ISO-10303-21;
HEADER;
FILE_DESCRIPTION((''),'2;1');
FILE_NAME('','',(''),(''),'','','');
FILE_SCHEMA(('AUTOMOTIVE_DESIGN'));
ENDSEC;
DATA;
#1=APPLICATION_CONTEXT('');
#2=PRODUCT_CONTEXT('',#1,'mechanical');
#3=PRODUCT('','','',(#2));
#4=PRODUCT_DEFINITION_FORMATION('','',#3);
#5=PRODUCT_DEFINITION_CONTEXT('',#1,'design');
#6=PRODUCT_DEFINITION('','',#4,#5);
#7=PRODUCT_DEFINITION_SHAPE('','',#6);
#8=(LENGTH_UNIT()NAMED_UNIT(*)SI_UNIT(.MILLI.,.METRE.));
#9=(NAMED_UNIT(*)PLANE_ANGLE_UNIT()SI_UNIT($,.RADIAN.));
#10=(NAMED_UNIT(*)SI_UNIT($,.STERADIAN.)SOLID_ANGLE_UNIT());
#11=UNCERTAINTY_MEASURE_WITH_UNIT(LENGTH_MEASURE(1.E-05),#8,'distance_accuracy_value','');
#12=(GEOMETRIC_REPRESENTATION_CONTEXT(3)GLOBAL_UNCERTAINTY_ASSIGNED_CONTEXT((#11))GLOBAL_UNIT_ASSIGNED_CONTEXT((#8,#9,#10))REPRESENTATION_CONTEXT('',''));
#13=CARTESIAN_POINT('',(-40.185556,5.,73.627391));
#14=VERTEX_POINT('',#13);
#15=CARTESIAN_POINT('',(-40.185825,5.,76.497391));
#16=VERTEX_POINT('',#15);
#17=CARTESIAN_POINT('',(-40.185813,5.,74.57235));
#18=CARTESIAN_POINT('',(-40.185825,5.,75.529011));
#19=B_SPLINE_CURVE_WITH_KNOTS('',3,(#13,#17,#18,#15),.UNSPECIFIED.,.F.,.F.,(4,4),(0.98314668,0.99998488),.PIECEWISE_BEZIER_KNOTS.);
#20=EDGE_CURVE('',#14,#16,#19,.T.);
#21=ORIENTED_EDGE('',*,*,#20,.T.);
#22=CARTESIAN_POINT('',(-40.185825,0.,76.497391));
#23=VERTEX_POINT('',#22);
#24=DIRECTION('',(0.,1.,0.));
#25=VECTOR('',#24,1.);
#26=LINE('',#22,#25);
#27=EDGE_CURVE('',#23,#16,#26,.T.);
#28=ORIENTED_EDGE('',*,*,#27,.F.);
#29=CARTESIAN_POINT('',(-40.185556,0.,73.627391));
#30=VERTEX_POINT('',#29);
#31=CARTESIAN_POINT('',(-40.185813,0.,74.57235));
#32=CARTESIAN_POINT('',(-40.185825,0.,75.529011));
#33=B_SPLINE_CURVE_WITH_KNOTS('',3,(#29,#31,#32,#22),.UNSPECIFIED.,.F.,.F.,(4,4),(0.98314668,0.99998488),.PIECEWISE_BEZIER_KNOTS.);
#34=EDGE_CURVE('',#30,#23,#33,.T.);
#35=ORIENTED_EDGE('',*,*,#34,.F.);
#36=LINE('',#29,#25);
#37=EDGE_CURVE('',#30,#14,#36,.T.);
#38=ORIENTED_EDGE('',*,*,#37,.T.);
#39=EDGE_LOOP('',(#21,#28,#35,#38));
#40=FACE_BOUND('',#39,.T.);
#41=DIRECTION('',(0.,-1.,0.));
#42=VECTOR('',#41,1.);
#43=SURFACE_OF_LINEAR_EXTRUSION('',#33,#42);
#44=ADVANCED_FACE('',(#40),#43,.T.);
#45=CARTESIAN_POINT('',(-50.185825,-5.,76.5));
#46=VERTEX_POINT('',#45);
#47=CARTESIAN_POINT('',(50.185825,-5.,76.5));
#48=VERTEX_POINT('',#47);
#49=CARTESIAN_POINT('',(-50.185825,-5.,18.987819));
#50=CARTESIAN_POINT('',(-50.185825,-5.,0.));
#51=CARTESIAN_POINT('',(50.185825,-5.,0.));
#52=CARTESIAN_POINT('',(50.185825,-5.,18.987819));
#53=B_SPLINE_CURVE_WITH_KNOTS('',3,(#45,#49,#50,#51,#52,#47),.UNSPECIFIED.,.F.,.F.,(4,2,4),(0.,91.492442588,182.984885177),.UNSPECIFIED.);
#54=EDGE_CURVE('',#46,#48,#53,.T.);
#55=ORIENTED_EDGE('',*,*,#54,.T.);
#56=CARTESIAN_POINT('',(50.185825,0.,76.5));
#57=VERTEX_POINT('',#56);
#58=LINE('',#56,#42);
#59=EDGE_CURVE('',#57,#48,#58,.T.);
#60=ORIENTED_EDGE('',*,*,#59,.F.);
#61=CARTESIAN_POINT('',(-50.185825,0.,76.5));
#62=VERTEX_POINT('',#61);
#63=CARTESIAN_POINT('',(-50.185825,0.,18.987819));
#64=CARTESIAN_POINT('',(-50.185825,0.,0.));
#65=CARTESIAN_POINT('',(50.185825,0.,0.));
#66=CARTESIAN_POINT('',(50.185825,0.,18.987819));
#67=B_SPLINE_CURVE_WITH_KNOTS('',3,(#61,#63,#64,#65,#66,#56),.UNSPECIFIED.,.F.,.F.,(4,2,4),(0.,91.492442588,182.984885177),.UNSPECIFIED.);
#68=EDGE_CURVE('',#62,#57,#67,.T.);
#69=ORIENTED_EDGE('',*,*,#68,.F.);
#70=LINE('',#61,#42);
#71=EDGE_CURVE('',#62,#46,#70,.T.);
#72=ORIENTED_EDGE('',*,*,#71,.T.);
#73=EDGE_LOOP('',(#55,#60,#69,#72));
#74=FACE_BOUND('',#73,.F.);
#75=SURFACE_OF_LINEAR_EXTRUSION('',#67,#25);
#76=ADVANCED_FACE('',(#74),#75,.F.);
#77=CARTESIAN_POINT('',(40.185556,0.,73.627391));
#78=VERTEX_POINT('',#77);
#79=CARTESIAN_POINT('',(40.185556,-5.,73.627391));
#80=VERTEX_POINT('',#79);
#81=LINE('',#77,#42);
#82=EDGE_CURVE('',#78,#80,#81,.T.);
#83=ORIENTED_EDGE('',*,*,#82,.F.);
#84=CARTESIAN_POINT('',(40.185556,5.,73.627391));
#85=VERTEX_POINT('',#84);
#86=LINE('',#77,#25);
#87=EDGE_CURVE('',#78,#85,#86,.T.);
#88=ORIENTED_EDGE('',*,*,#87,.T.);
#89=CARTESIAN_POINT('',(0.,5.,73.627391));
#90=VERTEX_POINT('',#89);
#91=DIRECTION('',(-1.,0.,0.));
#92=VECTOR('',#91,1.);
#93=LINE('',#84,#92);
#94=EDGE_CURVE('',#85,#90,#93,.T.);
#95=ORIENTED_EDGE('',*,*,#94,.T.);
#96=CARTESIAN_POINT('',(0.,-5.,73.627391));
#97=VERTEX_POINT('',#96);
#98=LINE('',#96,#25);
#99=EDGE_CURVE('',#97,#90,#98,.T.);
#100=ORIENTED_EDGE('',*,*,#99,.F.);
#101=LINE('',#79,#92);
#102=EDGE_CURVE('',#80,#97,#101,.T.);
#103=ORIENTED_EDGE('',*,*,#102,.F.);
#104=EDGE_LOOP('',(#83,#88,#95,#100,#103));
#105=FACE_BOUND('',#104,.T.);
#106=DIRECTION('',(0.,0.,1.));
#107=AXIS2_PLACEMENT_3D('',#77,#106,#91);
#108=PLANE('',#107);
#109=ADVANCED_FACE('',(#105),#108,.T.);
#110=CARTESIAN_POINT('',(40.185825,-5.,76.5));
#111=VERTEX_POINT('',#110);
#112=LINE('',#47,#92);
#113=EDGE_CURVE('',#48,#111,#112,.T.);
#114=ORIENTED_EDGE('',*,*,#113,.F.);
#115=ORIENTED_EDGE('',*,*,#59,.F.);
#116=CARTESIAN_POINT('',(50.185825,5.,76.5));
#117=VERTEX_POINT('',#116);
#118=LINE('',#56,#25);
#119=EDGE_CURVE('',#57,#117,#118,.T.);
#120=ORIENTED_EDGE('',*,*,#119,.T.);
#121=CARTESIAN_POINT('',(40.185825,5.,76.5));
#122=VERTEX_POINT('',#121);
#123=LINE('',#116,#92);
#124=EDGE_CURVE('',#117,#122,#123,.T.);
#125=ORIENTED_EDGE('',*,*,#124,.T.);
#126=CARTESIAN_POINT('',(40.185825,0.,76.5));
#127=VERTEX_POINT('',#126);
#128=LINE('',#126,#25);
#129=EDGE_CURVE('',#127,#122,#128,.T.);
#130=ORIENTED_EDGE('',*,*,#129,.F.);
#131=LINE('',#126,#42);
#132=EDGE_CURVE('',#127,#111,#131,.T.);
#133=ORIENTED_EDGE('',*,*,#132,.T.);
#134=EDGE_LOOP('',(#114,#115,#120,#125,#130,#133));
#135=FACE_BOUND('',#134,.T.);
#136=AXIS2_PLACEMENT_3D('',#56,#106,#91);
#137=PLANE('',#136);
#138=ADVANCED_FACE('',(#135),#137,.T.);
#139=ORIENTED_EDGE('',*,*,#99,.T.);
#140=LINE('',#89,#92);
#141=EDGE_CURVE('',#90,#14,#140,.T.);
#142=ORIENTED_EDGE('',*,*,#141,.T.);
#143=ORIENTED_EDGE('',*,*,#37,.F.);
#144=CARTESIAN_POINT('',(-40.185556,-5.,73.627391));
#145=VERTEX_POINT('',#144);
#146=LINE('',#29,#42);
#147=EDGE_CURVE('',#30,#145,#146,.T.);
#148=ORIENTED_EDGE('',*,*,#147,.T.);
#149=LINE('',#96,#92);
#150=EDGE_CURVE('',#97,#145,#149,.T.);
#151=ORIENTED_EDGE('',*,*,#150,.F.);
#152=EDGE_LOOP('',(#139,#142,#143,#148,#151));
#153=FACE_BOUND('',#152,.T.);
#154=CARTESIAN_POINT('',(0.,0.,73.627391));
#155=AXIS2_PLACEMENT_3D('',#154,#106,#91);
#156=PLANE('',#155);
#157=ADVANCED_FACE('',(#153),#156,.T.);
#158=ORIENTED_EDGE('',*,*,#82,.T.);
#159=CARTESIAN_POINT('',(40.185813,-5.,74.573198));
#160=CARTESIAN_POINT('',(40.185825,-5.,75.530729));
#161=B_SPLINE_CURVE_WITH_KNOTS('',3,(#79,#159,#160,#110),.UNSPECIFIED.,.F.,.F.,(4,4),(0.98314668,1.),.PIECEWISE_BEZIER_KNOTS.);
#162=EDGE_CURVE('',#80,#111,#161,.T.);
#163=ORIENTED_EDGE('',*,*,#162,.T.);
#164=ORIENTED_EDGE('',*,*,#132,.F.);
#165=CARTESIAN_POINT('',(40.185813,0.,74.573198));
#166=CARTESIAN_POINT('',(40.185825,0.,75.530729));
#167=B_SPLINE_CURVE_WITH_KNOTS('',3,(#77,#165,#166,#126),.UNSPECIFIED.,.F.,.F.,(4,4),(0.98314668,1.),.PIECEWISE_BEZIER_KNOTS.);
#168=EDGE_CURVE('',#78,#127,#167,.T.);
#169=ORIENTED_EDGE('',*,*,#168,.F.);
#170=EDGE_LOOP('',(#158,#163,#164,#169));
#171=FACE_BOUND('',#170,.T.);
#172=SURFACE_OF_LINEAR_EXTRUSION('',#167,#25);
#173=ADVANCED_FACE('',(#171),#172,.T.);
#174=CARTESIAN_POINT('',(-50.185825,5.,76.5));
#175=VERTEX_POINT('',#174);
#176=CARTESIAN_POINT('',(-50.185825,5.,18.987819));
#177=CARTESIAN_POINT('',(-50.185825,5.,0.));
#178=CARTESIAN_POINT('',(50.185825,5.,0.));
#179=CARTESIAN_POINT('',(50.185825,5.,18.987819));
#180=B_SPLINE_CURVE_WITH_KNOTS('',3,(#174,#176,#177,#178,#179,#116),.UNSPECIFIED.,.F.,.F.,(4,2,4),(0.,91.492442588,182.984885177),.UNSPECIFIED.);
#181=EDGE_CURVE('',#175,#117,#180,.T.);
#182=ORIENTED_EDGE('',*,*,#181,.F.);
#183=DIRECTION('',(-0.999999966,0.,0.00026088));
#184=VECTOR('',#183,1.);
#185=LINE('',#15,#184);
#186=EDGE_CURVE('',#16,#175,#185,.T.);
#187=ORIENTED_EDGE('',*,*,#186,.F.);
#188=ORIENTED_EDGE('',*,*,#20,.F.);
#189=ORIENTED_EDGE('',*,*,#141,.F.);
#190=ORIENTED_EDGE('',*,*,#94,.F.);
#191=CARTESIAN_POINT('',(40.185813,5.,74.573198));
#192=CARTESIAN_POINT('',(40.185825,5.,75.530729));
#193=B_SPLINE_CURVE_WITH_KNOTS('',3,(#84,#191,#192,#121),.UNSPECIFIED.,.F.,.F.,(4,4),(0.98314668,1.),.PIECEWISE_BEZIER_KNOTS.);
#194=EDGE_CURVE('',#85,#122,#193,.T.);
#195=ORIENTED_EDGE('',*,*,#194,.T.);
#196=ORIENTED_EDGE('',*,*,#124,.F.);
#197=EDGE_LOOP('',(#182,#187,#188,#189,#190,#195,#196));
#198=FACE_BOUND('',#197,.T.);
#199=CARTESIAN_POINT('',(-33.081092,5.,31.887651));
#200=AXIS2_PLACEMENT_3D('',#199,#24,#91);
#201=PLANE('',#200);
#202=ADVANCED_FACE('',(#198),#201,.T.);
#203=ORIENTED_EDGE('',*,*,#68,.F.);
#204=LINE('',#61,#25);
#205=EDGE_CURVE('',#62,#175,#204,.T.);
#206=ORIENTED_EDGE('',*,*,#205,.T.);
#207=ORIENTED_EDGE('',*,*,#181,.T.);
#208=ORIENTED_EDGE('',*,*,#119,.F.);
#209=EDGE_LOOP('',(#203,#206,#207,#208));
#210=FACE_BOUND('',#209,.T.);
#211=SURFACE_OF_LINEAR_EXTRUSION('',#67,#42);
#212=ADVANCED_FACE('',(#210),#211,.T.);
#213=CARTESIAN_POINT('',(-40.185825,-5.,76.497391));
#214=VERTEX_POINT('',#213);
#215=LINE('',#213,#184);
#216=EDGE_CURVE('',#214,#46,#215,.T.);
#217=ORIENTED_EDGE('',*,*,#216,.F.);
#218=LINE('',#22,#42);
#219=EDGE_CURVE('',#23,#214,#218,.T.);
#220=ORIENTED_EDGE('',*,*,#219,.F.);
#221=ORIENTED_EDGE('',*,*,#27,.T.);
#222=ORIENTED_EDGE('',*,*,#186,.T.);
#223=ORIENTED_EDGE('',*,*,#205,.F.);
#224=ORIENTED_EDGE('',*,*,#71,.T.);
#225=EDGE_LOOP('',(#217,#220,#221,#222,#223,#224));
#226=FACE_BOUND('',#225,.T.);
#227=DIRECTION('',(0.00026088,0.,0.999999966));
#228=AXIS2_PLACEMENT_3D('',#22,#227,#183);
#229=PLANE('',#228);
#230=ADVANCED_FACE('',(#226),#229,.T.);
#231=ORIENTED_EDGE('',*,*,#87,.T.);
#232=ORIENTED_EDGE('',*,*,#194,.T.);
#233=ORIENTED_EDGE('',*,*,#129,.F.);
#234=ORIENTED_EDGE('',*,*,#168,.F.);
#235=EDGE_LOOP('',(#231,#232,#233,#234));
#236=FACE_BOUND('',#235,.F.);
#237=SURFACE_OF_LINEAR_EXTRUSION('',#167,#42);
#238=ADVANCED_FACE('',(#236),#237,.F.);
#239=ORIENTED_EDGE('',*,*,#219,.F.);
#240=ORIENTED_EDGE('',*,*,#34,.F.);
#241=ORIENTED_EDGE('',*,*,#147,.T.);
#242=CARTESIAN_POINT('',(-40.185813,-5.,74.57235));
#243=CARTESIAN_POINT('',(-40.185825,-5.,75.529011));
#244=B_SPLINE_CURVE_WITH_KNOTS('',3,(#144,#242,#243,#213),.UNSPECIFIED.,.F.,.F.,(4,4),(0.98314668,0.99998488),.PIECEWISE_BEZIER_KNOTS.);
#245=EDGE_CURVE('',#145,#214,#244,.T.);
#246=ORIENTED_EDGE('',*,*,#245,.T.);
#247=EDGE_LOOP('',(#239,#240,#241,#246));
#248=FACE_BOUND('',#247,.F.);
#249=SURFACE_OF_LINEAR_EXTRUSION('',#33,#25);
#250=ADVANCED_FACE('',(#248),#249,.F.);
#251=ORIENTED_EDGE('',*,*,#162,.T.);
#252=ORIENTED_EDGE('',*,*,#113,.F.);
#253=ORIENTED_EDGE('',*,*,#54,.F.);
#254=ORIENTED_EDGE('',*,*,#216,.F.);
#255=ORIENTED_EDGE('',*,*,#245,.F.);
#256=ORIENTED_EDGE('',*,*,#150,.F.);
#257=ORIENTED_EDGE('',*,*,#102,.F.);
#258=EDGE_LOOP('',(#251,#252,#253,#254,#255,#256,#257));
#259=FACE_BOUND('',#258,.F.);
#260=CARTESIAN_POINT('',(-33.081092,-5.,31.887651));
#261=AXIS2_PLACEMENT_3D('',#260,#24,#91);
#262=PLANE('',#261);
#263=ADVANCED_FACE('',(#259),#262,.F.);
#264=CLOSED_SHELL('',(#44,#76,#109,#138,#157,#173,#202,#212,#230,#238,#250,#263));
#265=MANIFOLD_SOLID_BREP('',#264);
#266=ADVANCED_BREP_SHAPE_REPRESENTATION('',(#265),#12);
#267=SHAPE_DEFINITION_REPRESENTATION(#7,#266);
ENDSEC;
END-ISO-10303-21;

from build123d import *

# Parameters (mm, degrees)
F1_DEPTH = 5


# Not quite as in the source:
# - ends of sketch curves that miss each other by under 0.0002 mm in the source are joined
# - the dataset's text gives a spline's control points without its knots; the knots are read off the source's solid


with BuildPart() as f1:
    # F0 (on Front) → F1 (new body, symmetric)
    with BuildSketch(Plane.XZ):
        with BuildLine():
            add(Edge.make_bspline(
                [(0, 0), (-50.185825198, 0), (-50.185825198, 18.9878194471), (-50.185825198, 76.5)],
                knots=[0, 0, 0, 0, 91.4924425884, 91.4924425884, 91.4924425884, 91.4924425884], degree=3))
            Line((0, 0), (0, 10))
            add(Edge.make_bspline(
                [(0, 10), (-2.9789681379, 10), (-8.4955397739, 10.1413450921), (-15.4737654621, 10.776664129), (-21.1789329484, 11.809227477), (-25.6521730863, 13.1752084964), (-29.0027084757, 14.7778973307), (-31.4729254896, 16.5529365311), (-33.4126965241, 18.598166324), (-35.0926907472, 21.1958365208), (-36.5807802286, 24.6299720269), (-37.8303704724, 29.0468893658), (-38.7969863936, 34.4792506235), (-39.4760376196, 40.9128537432), (-39.8974470799, 48.3258672411), (-40.1654290193, 58.7432213291), (-40.1839080708, 67.5582061549), (-40.185555974, 73.6273912162)],
                knots=[0, 0, 0, 0, 0.0625, 0.125, 0.1875, 0.25, 0.3125, 0.375, 0.4375, 0.5, 0.5625, 0.625, 0.6875, 0.75, 0.8125, 0.875, 0.9831466803, 0.9831466803, 0.9831466803, 0.9831466803], degree=3))
            add(Edge.make_bspline(
                [(-40.185555974, 73.6273912162), (-40.1858125489, 74.5723499258), (-40.1858251755, 75.529010691), (-40.1858251979, 76.4973911991)],
                knots=[0.9831466803, 0.9831466803, 0.9831466803, 0.9831466803, 0.9999848796, 0.9999848796, 0.9999848796, 0.9999848796], degree=3))
            Line((-40.185825198, 76.4973911982), (-50.185825198, 76.5))
        make_face()
        with BuildLine():
            Line((0, 10), (0, 0))
            add(Edge.make_bspline(
                [(0, 0), (50.185825198, 0), (50.185825198, 18.9878194471), (50.185825198, 76.5)],
                knots=[0, 0, 0, 0, 91.4924425884, 91.4924425884, 91.4924425884, 91.4924425884], degree=3))
            Line((50.185825198, 76.5), (40.185825198, 76.5))
            add(Edge.make_bspline(
                [(40.185555974, 73.6273912083), (40.1858127793, 74.5731984789), (40.185825198, 75.5307288311), (40.185825198, 76.5)],
                knots=[0.9831466802, 0.9831466802, 0.9831466802, 0.9831466802, 1, 1, 1, 1], degree=3))
            add(Edge.make_bspline(
                [(0, 10), (2.9789681379, 10), (8.4955397739, 10.1413450921), (15.4737654621, 10.776664129), (21.1789329484, 11.809227477), (25.6521730863, 13.1752084964), (29.0027084757, 14.7778973307), (31.4729254896, 16.5529365311), (33.4126965241, 18.598166324), (35.0926907472, 21.1958365208), (36.5807802286, 24.6299720269), (37.8303704724, 29.0468893658), (38.7969863936, 34.4792506235), (39.4760376196, 40.9128537432), (39.8974470799, 48.3258672411), (40.1654290192, 58.7432213269), (40.1839080707, 67.55820615), (40.185555974, 73.6273912083)],
                knots=[0, 0, 0, 0, 0.0625, 0.125, 0.1875, 0.25, 0.3125, 0.375, 0.4375, 0.5, 0.5625, 0.625, 0.6875, 0.75, 0.8125, 0.875, 0.9831466802, 0.9831466802, 0.9831466802, 0.9831466802], degree=3))
        make_face()
        with BuildLine():
            add(Edge.make_bspline(
                [(0, 10), (-2.9789681379, 10), (-8.4955397739, 10.1413450921), (-15.4737654621, 10.776664129), (-21.1789329484, 11.809227477), (-25.6521730863, 13.1752084964), (-29.0027084757, 14.7778973307), (-31.4729254896, 16.5529365311), (-33.4126965241, 18.598166324), (-35.0926907472, 21.1958365208), (-36.5807802286, 24.6299720269), (-37.8303704724, 29.0468893658), (-38.7969863936, 34.4792506235), (-39.4760376196, 40.9128537432), (-39.8974470799, 48.3258672411), (-40.1654290193, 58.7432213291), (-40.1839080708, 67.5582061549), (-40.185555974, 73.6273912162)],
                knots=[0, 0, 0, 0, 0.0625, 0.125, 0.1875, 0.25, 0.3125, 0.375, 0.4375, 0.5, 0.5625, 0.625, 0.6875, 0.75, 0.8125, 0.875, 0.9831466803, 0.9831466803, 0.9831466803, 0.9831466803], degree=3))
            Line((0, 10), (0, 73.6273912083))
            Line((0, 73.6273912083), (-40.185555974, 73.6273912162))
        make_face()
        with BuildLine():
            Line((0, 73.6273912083), (0, 10))
            add(Edge.make_bspline(
                [(0, 10), (2.9789681379, 10), (8.4955397739, 10.1413450921), (15.4737654621, 10.776664129), (21.1789329484, 11.809227477), (25.6521730863, 13.1752084964), (29.0027084757, 14.7778973307), (31.4729254896, 16.5529365311), (33.4126965241, 18.598166324), (35.0926907472, 21.1958365208), (36.5807802286, 24.6299720269), (37.8303704724, 29.0468893658), (38.7969863936, 34.4792506235), (39.4760376196, 40.9128537432), (39.8974470799, 48.3258672411), (40.1654290192, 58.7432213269), (40.1839080707, 67.55820615), (40.185555974, 73.6273912083)],
                knots=[0, 0, 0, 0, 0.0625, 0.125, 0.1875, 0.25, 0.3125, 0.375, 0.4375, 0.5, 0.5625, 0.625, 0.6875, 0.75, 0.8125, 0.875, 0.9831466802, 0.9831466802, 0.9831466802, 0.9831466802], degree=3))
            Line((40.185555974, 73.6273912083), (0, 73.6273912083))
        make_face()
    extrude(amount=F1_DEPTH, both=True)


solid = f1.part
